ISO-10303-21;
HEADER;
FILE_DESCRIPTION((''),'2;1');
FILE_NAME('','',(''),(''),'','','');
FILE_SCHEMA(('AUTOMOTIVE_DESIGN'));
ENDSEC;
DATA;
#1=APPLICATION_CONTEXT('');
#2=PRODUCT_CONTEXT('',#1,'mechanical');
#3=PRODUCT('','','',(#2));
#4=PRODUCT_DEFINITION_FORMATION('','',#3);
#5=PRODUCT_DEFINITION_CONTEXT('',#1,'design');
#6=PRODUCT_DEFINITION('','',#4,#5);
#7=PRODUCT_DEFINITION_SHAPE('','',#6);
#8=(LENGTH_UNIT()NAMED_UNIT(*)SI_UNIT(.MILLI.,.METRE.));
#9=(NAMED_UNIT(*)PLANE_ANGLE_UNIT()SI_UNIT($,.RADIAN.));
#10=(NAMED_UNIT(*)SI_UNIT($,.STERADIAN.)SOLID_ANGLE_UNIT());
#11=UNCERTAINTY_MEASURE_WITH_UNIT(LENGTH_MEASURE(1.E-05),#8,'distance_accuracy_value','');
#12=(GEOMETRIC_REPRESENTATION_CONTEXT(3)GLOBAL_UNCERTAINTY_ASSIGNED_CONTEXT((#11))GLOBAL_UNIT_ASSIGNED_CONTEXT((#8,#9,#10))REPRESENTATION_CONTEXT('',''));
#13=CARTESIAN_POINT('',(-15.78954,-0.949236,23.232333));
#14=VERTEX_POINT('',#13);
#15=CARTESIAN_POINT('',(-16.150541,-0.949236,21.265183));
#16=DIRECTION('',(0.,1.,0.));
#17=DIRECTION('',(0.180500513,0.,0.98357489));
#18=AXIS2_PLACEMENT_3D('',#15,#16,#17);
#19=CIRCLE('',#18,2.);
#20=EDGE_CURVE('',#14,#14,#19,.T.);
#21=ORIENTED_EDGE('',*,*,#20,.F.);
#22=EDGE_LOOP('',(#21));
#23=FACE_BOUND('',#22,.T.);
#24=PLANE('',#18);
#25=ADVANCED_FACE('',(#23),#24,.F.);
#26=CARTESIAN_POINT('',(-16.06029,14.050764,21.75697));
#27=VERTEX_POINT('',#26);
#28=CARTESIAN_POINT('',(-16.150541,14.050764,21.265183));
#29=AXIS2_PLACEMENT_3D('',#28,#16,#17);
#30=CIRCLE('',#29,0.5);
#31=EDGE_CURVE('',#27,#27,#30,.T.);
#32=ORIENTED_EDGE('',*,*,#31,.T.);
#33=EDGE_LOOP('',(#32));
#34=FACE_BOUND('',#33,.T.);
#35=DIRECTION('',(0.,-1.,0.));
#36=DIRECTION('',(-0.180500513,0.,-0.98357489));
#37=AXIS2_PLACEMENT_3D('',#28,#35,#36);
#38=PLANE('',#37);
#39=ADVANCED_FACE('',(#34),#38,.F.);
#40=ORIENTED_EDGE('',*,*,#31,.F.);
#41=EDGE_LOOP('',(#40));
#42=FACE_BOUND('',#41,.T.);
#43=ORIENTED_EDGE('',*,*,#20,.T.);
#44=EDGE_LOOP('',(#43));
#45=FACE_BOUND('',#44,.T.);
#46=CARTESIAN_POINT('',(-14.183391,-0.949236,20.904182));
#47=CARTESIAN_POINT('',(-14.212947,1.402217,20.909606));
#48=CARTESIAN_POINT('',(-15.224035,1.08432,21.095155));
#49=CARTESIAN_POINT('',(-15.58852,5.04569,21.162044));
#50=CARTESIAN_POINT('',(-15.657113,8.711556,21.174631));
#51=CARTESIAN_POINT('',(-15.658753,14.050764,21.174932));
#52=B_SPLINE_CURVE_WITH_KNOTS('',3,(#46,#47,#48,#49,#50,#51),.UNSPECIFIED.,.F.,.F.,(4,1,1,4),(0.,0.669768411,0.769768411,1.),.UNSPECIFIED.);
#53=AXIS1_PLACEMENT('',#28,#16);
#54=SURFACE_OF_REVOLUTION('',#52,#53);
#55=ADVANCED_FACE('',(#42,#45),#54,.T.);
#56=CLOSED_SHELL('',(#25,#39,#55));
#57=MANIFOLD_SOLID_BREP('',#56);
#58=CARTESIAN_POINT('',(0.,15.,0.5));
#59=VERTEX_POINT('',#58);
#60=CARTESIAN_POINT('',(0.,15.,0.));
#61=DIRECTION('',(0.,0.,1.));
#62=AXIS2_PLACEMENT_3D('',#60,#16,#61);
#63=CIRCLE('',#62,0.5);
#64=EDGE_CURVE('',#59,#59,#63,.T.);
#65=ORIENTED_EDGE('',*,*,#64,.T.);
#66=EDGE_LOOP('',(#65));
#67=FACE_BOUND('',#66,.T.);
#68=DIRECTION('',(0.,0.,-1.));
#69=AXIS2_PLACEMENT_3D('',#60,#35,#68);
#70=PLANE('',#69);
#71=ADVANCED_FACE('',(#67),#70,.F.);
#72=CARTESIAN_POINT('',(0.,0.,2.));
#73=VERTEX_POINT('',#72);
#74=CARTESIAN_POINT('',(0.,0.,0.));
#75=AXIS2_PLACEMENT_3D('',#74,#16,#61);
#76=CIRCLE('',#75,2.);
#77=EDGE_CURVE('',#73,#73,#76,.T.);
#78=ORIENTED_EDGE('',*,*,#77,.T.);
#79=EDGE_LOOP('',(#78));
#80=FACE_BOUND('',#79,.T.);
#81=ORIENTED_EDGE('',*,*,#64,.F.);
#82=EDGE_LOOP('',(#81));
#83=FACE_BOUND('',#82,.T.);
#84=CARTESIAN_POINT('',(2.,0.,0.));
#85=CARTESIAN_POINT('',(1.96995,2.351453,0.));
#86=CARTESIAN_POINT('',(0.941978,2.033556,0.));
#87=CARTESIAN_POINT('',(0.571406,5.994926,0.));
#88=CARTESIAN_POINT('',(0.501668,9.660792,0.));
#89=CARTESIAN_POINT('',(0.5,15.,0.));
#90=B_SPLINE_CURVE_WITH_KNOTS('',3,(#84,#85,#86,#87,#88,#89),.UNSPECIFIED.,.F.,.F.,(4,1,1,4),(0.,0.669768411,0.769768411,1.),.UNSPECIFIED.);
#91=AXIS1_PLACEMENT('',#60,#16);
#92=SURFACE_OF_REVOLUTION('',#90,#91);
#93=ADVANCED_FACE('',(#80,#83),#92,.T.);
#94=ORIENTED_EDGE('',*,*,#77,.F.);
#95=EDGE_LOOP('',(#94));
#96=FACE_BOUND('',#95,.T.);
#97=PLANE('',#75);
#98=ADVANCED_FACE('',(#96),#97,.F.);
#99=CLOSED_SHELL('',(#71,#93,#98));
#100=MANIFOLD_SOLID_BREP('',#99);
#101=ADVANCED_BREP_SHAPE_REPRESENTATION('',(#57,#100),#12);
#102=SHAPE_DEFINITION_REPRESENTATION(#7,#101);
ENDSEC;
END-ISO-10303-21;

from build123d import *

# Parameters (mm, degrees)
CONVEX_CONE2_1_CONNECTED_OUTLINE_W = 0.5
CONVEX_CONE2_1_CONNECTED_OUTLINE_H = 15


# Read off the part's stored shape, not the designer's step: convex_cone2<1>@connected
with BuildPart() as part:
    # Sketch1 → Revolve8 (revolve)
    with BuildSketch(Plane.XY):
        with BuildLine():
            Line((0, 15), (0, 0))
            Line((0, 0), (2, 0))
            add(Edge.make_bspline(
                [(0.5, 15), (0.501667507, 9.660791997), (0.5714057, 5.994926019), (0.941978143, 2.03355611), (1.969950282, 2.351453197), (2, 0)],
                knots=[0, 0, 0, 0, 0.230231589, 0.330231589, 1, 1, 1, 1], degree=3))
            Line((0.5, 15), (0, 15))
        make_face()
    revolve(axis=Axis((0, 15, 0), (0, -1, 0)))


with BuildPart() as body_2:
    # convex_cone2<1>@connected outline → convex_cone2<1>@connected (revolve)
    with BuildSketch(Plane(origin=(-16.150540666, 0, 21.265182729), x_dir=(1, 0, 0), z_dir=(0, 0, 1))):
        with BuildLine():
            Line((0.5, -0.949235916), (2, -0.949235916))
            add(Edge.make_bspline(
                [(2, -0.949235916), (1.969950282, 1.402217281), (0.941978143, 1.084320194), (0.5714057, 5.045690103), (0.501667507, 8.711556081), (0.5, 14.050764084)],
                knots=[0, 0, 0, 0, 0.669768411, 0.769768411, 1, 1, 1, 1], degree=3))
            Line((0.5, 14.050764084), (0.5, -0.949235916))
        make_face()
        with Locations((0.25, 6.550764084)):
            Rectangle(CONVEX_CONE2_1_CONNECTED_OUTLINE_W, CONVEX_CONE2_1_CONNECTED_OUTLINE_H)
    revolve(axis=Axis((-16.150540666, 0, 21.265182729), (0, 1, 0)))


solid = Compound([part.part, body_2.part])
